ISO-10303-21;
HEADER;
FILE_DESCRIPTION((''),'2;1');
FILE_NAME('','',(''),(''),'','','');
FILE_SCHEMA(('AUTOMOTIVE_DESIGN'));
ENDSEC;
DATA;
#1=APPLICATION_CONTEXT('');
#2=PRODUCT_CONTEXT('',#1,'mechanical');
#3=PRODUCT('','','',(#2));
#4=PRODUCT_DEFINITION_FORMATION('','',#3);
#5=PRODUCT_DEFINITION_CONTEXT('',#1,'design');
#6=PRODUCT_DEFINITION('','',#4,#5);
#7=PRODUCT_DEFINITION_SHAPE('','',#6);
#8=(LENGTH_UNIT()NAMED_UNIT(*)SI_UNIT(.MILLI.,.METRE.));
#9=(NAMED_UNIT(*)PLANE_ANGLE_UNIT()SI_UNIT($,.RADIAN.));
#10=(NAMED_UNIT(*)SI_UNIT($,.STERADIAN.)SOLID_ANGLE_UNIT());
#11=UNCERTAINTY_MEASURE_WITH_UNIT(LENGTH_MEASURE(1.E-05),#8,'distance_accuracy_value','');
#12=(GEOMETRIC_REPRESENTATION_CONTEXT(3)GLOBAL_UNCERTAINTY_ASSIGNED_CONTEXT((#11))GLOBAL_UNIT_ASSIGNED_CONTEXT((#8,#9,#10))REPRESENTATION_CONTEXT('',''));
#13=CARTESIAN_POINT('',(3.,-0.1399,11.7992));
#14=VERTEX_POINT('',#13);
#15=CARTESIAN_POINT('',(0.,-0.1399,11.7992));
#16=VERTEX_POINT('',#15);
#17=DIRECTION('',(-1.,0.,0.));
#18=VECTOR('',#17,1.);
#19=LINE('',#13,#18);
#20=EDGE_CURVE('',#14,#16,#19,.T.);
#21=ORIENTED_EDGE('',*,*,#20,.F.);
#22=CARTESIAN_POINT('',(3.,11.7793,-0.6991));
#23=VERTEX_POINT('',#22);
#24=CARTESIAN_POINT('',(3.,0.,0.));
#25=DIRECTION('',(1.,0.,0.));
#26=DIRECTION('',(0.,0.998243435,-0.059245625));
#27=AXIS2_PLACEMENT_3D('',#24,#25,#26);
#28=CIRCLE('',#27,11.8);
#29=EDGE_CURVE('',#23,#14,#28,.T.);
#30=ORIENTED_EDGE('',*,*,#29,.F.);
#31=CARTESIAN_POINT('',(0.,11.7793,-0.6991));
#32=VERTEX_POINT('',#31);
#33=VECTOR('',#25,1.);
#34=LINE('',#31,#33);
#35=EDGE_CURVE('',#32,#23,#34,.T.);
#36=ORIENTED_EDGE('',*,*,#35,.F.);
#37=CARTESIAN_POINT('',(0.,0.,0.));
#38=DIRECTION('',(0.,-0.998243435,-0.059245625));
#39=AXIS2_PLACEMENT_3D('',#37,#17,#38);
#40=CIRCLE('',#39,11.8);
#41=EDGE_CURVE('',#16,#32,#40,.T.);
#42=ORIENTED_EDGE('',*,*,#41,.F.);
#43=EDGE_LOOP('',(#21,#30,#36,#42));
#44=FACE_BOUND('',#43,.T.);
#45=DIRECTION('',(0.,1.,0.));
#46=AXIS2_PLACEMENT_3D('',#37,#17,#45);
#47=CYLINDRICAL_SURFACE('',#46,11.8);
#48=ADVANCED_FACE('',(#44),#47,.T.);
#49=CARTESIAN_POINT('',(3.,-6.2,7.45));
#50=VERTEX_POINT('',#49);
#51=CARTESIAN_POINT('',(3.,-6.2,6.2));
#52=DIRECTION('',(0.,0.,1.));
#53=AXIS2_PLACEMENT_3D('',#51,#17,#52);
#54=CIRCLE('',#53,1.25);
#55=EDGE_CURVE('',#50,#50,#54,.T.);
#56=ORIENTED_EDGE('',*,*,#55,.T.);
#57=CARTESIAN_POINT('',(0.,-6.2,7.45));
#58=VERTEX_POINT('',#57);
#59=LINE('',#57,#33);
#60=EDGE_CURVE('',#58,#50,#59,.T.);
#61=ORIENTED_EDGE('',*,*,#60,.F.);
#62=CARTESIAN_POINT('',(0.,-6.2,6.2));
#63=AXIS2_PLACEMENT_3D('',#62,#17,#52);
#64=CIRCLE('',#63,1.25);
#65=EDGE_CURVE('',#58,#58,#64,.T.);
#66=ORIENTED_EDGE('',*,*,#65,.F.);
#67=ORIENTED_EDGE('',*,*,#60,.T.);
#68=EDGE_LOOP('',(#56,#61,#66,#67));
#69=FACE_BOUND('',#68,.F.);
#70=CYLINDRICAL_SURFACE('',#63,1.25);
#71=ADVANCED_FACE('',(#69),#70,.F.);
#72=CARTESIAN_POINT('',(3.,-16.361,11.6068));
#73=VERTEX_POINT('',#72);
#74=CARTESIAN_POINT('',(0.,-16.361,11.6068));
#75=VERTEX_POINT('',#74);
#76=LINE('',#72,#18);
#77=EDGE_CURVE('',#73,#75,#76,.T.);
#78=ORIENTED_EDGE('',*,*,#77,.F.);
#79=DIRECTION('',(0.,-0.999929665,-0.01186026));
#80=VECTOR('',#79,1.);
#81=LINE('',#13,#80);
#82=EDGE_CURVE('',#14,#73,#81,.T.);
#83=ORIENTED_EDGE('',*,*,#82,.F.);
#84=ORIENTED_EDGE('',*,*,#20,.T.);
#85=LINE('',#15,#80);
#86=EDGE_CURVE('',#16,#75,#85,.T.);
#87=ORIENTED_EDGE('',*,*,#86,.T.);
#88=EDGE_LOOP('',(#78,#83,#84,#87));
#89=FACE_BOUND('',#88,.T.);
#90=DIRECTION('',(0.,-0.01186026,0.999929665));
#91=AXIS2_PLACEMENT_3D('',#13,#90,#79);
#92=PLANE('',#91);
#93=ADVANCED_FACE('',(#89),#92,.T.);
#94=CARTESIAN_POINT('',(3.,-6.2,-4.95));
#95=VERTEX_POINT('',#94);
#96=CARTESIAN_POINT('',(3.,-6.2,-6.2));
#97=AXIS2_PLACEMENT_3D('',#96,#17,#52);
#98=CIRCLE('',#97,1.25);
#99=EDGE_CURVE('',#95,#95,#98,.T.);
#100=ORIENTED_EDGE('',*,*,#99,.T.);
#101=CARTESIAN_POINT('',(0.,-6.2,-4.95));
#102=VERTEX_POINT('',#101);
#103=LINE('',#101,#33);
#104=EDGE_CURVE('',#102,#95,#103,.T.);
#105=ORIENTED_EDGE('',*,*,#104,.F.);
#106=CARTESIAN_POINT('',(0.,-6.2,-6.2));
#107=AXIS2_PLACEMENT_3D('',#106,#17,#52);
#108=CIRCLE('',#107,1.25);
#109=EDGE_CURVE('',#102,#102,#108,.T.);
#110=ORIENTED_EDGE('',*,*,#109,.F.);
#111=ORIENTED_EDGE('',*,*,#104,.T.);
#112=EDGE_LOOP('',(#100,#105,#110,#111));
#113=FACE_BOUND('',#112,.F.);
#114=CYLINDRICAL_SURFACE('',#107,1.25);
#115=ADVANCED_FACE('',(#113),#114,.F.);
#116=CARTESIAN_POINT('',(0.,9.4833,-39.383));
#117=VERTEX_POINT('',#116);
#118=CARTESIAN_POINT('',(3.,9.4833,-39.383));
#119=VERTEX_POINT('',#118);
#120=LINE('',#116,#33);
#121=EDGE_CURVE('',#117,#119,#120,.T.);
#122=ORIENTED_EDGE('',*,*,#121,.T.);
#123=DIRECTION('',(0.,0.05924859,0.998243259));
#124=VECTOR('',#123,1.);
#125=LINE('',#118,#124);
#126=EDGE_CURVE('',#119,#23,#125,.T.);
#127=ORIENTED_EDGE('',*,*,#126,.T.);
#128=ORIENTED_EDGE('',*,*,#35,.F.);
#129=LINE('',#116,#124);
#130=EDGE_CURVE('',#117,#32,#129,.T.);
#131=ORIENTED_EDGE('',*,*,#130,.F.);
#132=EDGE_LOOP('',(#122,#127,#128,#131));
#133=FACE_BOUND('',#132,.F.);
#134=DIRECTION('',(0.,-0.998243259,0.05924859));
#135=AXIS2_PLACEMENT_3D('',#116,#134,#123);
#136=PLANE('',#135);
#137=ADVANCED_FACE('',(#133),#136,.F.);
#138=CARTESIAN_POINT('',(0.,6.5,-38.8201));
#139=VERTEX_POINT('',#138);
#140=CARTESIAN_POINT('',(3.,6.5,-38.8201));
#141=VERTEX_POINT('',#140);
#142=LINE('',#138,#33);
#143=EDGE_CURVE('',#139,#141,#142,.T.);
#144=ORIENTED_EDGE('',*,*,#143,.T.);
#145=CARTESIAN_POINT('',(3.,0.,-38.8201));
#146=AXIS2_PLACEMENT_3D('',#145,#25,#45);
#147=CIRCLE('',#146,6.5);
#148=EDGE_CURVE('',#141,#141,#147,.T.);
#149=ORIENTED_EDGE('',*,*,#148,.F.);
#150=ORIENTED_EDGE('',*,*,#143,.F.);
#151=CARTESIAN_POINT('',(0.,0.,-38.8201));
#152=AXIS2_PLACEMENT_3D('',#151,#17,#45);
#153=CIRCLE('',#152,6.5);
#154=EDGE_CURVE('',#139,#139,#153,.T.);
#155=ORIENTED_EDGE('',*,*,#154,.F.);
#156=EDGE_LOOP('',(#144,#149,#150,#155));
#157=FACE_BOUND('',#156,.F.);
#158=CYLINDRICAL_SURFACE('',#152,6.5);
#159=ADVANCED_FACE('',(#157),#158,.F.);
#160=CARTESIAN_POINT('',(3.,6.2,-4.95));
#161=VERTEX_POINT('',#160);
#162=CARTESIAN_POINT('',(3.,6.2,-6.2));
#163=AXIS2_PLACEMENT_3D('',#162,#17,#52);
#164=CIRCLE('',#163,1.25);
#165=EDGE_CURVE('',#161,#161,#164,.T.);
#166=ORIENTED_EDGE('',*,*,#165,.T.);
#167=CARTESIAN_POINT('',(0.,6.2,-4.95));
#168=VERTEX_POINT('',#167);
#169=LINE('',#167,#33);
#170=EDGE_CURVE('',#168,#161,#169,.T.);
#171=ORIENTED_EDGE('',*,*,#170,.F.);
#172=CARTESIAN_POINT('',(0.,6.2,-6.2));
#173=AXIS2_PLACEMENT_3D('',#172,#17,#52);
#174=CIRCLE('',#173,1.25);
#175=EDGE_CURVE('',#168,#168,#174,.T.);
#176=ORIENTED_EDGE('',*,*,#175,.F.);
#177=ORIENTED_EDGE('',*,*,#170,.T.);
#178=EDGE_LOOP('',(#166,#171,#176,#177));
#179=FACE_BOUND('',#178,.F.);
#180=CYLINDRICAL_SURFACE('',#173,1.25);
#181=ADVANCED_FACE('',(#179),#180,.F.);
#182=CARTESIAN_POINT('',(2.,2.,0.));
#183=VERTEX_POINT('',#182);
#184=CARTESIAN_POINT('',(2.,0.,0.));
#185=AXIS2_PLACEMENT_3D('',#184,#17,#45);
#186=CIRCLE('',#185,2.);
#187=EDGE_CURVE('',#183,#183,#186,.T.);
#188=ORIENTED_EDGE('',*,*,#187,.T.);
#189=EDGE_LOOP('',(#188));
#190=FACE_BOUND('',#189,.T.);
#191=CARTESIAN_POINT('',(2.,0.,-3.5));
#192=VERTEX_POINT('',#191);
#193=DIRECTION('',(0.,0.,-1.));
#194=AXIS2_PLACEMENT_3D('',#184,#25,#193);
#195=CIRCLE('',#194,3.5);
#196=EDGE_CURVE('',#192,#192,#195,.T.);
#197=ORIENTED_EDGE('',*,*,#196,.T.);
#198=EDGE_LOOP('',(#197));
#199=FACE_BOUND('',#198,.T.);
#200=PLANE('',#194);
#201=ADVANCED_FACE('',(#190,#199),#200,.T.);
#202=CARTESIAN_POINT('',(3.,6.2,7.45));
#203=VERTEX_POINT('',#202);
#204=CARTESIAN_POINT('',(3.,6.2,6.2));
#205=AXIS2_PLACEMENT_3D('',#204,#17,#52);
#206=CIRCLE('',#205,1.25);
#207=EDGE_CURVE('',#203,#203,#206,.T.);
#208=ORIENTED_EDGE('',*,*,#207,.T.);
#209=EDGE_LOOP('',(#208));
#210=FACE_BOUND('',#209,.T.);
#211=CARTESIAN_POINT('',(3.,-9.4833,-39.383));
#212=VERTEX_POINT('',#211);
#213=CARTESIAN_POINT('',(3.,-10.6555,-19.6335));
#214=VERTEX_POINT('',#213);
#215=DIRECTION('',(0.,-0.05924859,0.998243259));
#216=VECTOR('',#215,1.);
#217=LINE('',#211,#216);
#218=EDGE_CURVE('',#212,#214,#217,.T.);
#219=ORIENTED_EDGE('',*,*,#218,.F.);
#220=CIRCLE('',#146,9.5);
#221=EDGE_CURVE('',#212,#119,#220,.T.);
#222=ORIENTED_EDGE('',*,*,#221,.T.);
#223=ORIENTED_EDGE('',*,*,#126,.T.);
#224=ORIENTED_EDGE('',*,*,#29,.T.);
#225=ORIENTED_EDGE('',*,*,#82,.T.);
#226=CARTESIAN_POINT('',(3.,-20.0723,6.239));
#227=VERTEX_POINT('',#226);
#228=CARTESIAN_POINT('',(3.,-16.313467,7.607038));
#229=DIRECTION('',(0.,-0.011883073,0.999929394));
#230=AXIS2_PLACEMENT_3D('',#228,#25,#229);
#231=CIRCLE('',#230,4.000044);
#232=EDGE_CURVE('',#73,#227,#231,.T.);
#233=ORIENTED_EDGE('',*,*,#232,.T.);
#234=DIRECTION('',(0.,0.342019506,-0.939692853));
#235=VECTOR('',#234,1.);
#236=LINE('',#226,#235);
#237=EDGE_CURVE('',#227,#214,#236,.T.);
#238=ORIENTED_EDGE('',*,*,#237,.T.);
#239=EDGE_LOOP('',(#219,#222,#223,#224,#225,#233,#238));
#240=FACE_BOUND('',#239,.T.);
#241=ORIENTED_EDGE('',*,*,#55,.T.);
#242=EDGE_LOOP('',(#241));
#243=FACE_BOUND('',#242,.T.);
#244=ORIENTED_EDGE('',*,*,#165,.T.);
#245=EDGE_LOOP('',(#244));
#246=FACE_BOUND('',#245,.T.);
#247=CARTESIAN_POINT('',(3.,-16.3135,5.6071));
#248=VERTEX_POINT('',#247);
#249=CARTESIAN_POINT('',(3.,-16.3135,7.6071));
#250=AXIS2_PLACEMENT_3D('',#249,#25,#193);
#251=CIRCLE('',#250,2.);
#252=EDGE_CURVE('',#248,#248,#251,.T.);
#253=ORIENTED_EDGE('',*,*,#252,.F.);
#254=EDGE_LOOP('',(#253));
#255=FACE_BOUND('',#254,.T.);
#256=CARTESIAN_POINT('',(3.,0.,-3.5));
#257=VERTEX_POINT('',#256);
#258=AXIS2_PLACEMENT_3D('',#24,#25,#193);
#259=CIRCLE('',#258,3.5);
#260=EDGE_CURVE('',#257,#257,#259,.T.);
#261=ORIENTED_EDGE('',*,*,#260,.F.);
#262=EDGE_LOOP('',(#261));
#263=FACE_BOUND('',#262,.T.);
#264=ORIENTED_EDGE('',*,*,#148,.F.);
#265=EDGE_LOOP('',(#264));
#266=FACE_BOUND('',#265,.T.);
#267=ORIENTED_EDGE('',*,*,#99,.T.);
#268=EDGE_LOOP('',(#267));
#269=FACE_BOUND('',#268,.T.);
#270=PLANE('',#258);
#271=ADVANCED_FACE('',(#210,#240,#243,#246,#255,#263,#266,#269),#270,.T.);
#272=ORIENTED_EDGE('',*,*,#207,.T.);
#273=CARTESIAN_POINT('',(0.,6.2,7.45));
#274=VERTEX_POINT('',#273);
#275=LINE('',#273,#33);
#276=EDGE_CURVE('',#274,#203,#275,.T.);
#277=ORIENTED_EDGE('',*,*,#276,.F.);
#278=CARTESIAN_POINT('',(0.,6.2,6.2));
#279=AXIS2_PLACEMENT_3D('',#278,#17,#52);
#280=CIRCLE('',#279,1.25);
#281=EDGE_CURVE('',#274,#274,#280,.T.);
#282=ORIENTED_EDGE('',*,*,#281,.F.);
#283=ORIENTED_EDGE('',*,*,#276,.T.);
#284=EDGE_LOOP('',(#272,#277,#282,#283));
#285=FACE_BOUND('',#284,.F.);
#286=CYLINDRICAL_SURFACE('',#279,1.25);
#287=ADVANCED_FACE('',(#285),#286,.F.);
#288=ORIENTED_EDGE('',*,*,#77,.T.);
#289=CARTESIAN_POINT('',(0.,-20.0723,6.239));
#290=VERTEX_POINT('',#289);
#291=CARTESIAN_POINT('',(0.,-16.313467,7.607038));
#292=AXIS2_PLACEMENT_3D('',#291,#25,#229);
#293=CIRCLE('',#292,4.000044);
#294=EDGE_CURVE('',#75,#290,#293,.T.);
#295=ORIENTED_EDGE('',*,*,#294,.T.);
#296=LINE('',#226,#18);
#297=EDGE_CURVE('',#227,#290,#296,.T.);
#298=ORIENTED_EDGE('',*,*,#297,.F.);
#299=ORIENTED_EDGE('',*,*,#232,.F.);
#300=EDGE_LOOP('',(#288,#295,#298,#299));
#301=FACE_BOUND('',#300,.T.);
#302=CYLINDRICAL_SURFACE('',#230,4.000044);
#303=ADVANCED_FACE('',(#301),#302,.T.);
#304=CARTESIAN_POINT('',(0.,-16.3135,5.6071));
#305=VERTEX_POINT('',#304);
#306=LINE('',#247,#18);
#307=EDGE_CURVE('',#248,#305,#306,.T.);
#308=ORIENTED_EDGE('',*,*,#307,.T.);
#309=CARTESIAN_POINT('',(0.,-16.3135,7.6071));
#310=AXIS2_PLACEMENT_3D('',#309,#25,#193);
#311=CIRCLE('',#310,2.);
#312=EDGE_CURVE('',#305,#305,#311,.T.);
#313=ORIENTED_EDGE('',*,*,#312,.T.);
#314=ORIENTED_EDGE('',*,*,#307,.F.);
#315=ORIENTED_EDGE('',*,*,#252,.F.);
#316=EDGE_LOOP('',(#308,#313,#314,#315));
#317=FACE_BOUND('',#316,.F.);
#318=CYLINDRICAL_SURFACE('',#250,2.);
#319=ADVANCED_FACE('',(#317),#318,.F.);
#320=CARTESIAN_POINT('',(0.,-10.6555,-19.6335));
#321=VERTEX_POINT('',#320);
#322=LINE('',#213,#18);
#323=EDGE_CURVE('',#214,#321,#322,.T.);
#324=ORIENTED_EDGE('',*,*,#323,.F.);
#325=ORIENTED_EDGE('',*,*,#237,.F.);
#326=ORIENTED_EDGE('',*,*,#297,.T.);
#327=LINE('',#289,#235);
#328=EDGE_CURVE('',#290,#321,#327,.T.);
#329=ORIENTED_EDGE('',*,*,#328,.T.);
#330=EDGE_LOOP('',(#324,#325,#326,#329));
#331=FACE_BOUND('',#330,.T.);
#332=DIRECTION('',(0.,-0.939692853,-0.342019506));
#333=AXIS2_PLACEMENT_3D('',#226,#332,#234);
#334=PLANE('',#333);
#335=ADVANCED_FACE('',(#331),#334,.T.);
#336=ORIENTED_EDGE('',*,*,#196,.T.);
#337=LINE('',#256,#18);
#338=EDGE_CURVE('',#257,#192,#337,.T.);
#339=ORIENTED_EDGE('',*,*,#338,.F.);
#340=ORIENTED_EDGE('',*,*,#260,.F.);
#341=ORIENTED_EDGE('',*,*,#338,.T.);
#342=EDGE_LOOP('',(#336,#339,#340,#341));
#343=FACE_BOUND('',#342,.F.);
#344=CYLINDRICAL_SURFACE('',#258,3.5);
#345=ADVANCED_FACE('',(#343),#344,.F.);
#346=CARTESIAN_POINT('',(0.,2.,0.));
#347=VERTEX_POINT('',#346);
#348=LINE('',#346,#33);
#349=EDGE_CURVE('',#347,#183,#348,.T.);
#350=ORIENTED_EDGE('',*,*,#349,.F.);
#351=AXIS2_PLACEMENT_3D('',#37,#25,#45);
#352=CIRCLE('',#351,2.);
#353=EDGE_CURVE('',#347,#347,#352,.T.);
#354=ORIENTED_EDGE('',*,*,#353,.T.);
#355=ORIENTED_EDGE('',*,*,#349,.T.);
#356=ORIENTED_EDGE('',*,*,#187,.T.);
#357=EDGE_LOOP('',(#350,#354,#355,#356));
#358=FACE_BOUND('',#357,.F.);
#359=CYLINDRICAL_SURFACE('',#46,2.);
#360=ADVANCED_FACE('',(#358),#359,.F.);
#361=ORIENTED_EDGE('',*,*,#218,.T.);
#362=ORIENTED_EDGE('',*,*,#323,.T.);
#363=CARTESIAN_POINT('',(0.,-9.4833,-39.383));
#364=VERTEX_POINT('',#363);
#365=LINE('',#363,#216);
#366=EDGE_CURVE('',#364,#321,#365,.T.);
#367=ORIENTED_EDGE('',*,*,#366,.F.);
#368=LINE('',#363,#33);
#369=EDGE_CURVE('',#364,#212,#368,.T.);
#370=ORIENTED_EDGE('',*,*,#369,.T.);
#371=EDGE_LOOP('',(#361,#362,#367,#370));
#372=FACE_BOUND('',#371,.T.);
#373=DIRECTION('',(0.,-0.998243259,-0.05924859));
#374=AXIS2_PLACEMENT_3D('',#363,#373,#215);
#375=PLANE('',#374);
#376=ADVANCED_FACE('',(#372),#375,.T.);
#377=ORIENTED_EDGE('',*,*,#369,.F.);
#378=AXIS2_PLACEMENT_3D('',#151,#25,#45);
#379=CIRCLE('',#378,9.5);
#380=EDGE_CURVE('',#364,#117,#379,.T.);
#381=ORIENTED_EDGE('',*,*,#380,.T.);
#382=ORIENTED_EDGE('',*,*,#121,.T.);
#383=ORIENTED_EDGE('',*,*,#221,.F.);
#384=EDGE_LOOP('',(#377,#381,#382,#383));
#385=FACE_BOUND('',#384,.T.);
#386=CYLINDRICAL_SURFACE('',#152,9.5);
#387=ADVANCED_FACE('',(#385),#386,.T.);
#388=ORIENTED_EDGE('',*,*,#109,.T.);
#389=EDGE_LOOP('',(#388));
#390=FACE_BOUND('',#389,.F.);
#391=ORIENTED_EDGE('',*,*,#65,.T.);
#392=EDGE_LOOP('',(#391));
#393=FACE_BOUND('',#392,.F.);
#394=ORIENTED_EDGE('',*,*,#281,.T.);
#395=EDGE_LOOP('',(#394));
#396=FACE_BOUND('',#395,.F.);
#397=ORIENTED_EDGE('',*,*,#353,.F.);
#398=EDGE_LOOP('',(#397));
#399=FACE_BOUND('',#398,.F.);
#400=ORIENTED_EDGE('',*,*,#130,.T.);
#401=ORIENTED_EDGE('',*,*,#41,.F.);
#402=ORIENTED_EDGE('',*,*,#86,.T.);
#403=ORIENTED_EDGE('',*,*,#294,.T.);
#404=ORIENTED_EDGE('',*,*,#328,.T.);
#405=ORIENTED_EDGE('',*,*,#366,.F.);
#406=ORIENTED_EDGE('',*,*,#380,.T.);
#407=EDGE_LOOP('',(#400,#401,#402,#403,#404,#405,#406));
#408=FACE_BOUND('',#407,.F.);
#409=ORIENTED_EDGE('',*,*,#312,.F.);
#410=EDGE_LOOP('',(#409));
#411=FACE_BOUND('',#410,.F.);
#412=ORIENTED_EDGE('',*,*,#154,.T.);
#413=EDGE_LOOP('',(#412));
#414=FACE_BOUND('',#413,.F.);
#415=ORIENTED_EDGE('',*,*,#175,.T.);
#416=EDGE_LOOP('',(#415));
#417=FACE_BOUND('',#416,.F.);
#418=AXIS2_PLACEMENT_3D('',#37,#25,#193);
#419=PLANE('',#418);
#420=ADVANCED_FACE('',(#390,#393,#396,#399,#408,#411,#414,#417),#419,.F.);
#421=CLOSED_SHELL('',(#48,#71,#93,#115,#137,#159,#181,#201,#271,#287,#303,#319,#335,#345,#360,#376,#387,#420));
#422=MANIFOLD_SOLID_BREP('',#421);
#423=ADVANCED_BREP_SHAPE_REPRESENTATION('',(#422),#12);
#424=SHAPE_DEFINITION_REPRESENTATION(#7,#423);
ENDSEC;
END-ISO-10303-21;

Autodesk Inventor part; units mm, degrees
ref_plane "YZ Plane" through (0, 0, 0) normal (1, 0, 0) x (0, 1, 0)
ref_plane "XZ Plane" through (0, 0, 0) normal (0, 1, 0) x (-1, 0, 0)
ref_plane "XY Plane" through (0, 0, 0) normal (0, 0, 1) x (1, 0, 0)
sketch "Эскиз1" plane through (0, 0, 0) normal (1, 0, 0) x (0, 1, 0)
  circle A0 centre (35.2311, -22.6062) radius 9.3
  circle A1 centre (0, -38.8201) radius 6.1
  circle A2 centre (0, 0) radius 4.85
  circle A3 centre (35.8147, -49.5529) radius 3.55
  line L0 (6.0968, -38.6237) -> (4.8475, 0.1562)
  line L1 (-4.8475, 0.1562) -> (-6.0968, -38.6237)
  line L2 (0, 0) -> (0, -38.8201) construction
  circle A4 centre (0, -38.8201) radius 6.5
  circle A5 centre (0, 0) radius 2
  circle A6 centre (0, -38.8201) radius 15 construction
  circle A7 centre (0, 0) radius 14 construction
  circle A8 centre (0, -38.8201) radius 9.5
  circle A9 centre (0, 0) radius 7
  line L3 (9.4833, -39.383) -> (11.7793, -0.6991)
  line L4 (-9.4833, -39.383) -> (-11.7793, -0.6991)
  circle A10 centre (0, 0) radius 8.8
  circle A11 centre (0, 0) radius 11.8
  point P0 (-7, 0)
  point P1 (-9.4833, -39.383)
  point P2 (-11.7793, -0.6991)
  dimension "d27" = 19
  dimension "d0" = 18.6
  dimension "d1" = 12.2
  dimension "d2" = 9.7
  dimension "d3" = 7.1
  dimension "d8" = 38.8201
  dimension "d13" = 38.8
  dimension "d14" = 38.8
  dimension "d23" = 13
  dimension "d24" = 4
  dimension "d25" = 30
  dimension "d26" = 28
  dimension "d28" = 14
  dimension "d31" = 17.6
  dimension "d32" = 3
extrude "Выдавливание4" add sketch "Эскиз1" along normal blind 3 contours A4 L1 A8 L0 | L0 A8 L1 A4 | A8 L1 A11 L0 | L0 A11 L3 A8 | A8 L4 A11 L1 | A11 L1 A10 L0 | L0 A10 L1 A11 | A10 L1 A9 L0 | L0 A9 L1 A10 | A9 L1 A2 L0 | L0 A2 L1 A9 | A2
sketch "Эскиз4" plane through (0, 0, 0) normal (-1, 0, 0) x (0, 0, 1)
  circle A0 centre (-6.2, 6.2) radius 1.25
  circle A1 centre (0, 0) radius 2 construction
  circle A2 centre (-38.8201, 0) radius 6.5 construction
  arc A3 (-0.6991, -11.7793) -> (-0.6991, 11.7793) centre (0, 0) ccw construction
  line L0 (-39.383, 9.4833) -> (-0.6991, 11.7793) construction
  arc A4 (-39.383, 9.4833) -> (-39.383, -9.4833) centre (-38.8201, 0) ccw construction
  line L1 (-0.6991, -11.7793) -> (-39.383, -9.4833) construction
  line L2 (0, 0) -> (0, 11.8) construction
  arc A5 (-0.6991, -11.7793) -> (-0.6991, 11.7793) centre (0, 0) ccw construction
  line L3 (0, 0) -> (11.8, 0) construction
  circle A6 centre (6.2, 6.2) radius 1.25
  circle A7 centre (-6.2, -6.2) radius 1.25
  circle A8 centre (6.2, -6.2) radius 1.25
  dimension "d33" = 2.5
  dimension "d34" = 12.4
  dimension "d35" = 12.4
extrude "Выдавливание5" cut sketch "Эскиз4" against normal blind 3
sketch "Эскиз5" plane through (3, 0, 0) normal (1, 0, 0) x (0, 0, -1)
  circle A0 centre (0, 0) radius 3.5
  dimension "d38" = 7
extrude "Выдавливание6" cut sketch "Эскиз5" against normal blind 1
sketch "Эскиз6" plane through (3, 0, 0) normal (1, 0, 0) x (0, 0, -1)
  circle A0 centre (0, -18) radius 2
  circle A1 centre (0, 0) radius 3.5 construction
  circle A2 centre (-6.2, -6.2) radius 1.25 construction
  circle A3 centre (-6.2, 6.2) radius 1.25 construction
  circle A4 centre (6.2, -6.2) radius 1.25 construction
  circle A5 centre (6.2, 6.2) radius 1.25 construction
  circle A6 centre (38.8201, 0) radius 6.5 construction
  line L0 (39.383, 9.4833) -> (0.6991, 11.7793) construction
  arc A7 (0.6991, 11.7793) -> (0.6991, -11.7793) centre (0, 0) ccw construction
  line L1 (0.6991, -11.7793) -> (39.383, -9.4833) construction
  arc A8 (39.383, -9.4833) -> (39.383, 9.4833) centre (38.8201, 0) ccw construction
  line L2 (0, 0) -> (0, -26.6004) construction
  circle A9 centre (0, 0) radius 14 construction
  line L3 (-10.6346, -5.1133) -> (-3.6049, -19.7333)
  arc A10 (0, -14) -> (-3.6049, -19.7333) centre (0, -18) ccw construction
  line L4 (2.8284, -20.8284) -> (12.5829, -11.0739)
  line L5 (0.6991, -11.7793) -> (39.383, -9.4833) construction
  arc A11 (2.8284, -20.8284) -> (0, -14) centre (0, -18) ccw construction
  arc A12 (-3.6049, -19.7333) -> (2.8284, -20.8284) centre (0, -18) ccw
  line L6 (-10.6346, -5.1133) -> (-9.9206, -5.1133)
  line L7 (-9.9206, -5.1133) -> (-6.5876, -8.9793)
  line L8 (-6.5876, -8.9793) -> (5.3497, -10.0676)
  line L9 (5.3497, -10.0676) -> (12.5829, -11.0739)
  dimension "d42" = 28
  dimension "d41" = 4
  dimension "d43" = 18
  dimension "d44" = 8
  dimension "d45" = 45
extrude "Выдавливание7" [suppressed]
sketch "Эскиз7" plane through (3, 0, 0) normal (1, 0, 0) x (0, 0, -1)
  line L0 (0, 0) -> (0, -29.4139) construction
  circle A0 centre (-7.6071, -16.3135) radius 2
  line L1 (-7.6071, -16.3135) -> (0, 0) construction
  circle A1 centre (0, 0) radius 14 construction
  circle A2 centre (0, 0) radius 18 construction
  arc A3 (-6.239, -20.0723) -> (-11.6068, -16.361) centre (-7.6071, -16.3135) ccw construction
  circle A4 centre (0, 0) radius 3.5 construction
  circle A5 centre (-6.2, -6.2) radius 1.25 construction
  circle A6 centre (-6.2, 6.2) radius 1.25 construction
  circle A7 centre (6.2, -6.2) radius 1.25 construction
  circle A8 centre (6.2, 6.2) radius 1.25 construction
  circle A9 centre (38.8201, 0) radius 6.5 construction
  line L2 (39.383, 9.4833) -> (0.6991, 11.7793) construction
  arc A10 (0.6991, 11.7793) -> (0.6991, -11.7793) centre (0, 0) ccw projected
  line L3 (0.6991, -11.7793) -> (39.383, -9.4833) projected
  arc A11 (39.383, -9.4833) -> (39.383, 9.4833) centre (38.8201, 0) ccw construction
  line L4 (-11.7992, -0.1399) -> (-11.6068, -16.361)
  line L5 (-6.239, -20.0723) -> (19.6335, -10.6555)
  line L6 (0.6991, -11.7793) -> (39.383, -9.4833) construction
  arc A12 (-11.6068, -16.361) -> (-6.239, -20.0723) centre (-7.6071, -16.3135) ccw
  point P0 (19.6335, -10.6555)
  dimension "d48" = 4
  dimension "d50" = 28
  dimension "d52" = 8
  dimension "d53" = 45
  dimension "d56" = 25
  dimension "d57" = 4
extrude "Выдавливание8" add sketch "Эскиз7" against normal up to surface (3 mm away)
properties part number "right_wall"
